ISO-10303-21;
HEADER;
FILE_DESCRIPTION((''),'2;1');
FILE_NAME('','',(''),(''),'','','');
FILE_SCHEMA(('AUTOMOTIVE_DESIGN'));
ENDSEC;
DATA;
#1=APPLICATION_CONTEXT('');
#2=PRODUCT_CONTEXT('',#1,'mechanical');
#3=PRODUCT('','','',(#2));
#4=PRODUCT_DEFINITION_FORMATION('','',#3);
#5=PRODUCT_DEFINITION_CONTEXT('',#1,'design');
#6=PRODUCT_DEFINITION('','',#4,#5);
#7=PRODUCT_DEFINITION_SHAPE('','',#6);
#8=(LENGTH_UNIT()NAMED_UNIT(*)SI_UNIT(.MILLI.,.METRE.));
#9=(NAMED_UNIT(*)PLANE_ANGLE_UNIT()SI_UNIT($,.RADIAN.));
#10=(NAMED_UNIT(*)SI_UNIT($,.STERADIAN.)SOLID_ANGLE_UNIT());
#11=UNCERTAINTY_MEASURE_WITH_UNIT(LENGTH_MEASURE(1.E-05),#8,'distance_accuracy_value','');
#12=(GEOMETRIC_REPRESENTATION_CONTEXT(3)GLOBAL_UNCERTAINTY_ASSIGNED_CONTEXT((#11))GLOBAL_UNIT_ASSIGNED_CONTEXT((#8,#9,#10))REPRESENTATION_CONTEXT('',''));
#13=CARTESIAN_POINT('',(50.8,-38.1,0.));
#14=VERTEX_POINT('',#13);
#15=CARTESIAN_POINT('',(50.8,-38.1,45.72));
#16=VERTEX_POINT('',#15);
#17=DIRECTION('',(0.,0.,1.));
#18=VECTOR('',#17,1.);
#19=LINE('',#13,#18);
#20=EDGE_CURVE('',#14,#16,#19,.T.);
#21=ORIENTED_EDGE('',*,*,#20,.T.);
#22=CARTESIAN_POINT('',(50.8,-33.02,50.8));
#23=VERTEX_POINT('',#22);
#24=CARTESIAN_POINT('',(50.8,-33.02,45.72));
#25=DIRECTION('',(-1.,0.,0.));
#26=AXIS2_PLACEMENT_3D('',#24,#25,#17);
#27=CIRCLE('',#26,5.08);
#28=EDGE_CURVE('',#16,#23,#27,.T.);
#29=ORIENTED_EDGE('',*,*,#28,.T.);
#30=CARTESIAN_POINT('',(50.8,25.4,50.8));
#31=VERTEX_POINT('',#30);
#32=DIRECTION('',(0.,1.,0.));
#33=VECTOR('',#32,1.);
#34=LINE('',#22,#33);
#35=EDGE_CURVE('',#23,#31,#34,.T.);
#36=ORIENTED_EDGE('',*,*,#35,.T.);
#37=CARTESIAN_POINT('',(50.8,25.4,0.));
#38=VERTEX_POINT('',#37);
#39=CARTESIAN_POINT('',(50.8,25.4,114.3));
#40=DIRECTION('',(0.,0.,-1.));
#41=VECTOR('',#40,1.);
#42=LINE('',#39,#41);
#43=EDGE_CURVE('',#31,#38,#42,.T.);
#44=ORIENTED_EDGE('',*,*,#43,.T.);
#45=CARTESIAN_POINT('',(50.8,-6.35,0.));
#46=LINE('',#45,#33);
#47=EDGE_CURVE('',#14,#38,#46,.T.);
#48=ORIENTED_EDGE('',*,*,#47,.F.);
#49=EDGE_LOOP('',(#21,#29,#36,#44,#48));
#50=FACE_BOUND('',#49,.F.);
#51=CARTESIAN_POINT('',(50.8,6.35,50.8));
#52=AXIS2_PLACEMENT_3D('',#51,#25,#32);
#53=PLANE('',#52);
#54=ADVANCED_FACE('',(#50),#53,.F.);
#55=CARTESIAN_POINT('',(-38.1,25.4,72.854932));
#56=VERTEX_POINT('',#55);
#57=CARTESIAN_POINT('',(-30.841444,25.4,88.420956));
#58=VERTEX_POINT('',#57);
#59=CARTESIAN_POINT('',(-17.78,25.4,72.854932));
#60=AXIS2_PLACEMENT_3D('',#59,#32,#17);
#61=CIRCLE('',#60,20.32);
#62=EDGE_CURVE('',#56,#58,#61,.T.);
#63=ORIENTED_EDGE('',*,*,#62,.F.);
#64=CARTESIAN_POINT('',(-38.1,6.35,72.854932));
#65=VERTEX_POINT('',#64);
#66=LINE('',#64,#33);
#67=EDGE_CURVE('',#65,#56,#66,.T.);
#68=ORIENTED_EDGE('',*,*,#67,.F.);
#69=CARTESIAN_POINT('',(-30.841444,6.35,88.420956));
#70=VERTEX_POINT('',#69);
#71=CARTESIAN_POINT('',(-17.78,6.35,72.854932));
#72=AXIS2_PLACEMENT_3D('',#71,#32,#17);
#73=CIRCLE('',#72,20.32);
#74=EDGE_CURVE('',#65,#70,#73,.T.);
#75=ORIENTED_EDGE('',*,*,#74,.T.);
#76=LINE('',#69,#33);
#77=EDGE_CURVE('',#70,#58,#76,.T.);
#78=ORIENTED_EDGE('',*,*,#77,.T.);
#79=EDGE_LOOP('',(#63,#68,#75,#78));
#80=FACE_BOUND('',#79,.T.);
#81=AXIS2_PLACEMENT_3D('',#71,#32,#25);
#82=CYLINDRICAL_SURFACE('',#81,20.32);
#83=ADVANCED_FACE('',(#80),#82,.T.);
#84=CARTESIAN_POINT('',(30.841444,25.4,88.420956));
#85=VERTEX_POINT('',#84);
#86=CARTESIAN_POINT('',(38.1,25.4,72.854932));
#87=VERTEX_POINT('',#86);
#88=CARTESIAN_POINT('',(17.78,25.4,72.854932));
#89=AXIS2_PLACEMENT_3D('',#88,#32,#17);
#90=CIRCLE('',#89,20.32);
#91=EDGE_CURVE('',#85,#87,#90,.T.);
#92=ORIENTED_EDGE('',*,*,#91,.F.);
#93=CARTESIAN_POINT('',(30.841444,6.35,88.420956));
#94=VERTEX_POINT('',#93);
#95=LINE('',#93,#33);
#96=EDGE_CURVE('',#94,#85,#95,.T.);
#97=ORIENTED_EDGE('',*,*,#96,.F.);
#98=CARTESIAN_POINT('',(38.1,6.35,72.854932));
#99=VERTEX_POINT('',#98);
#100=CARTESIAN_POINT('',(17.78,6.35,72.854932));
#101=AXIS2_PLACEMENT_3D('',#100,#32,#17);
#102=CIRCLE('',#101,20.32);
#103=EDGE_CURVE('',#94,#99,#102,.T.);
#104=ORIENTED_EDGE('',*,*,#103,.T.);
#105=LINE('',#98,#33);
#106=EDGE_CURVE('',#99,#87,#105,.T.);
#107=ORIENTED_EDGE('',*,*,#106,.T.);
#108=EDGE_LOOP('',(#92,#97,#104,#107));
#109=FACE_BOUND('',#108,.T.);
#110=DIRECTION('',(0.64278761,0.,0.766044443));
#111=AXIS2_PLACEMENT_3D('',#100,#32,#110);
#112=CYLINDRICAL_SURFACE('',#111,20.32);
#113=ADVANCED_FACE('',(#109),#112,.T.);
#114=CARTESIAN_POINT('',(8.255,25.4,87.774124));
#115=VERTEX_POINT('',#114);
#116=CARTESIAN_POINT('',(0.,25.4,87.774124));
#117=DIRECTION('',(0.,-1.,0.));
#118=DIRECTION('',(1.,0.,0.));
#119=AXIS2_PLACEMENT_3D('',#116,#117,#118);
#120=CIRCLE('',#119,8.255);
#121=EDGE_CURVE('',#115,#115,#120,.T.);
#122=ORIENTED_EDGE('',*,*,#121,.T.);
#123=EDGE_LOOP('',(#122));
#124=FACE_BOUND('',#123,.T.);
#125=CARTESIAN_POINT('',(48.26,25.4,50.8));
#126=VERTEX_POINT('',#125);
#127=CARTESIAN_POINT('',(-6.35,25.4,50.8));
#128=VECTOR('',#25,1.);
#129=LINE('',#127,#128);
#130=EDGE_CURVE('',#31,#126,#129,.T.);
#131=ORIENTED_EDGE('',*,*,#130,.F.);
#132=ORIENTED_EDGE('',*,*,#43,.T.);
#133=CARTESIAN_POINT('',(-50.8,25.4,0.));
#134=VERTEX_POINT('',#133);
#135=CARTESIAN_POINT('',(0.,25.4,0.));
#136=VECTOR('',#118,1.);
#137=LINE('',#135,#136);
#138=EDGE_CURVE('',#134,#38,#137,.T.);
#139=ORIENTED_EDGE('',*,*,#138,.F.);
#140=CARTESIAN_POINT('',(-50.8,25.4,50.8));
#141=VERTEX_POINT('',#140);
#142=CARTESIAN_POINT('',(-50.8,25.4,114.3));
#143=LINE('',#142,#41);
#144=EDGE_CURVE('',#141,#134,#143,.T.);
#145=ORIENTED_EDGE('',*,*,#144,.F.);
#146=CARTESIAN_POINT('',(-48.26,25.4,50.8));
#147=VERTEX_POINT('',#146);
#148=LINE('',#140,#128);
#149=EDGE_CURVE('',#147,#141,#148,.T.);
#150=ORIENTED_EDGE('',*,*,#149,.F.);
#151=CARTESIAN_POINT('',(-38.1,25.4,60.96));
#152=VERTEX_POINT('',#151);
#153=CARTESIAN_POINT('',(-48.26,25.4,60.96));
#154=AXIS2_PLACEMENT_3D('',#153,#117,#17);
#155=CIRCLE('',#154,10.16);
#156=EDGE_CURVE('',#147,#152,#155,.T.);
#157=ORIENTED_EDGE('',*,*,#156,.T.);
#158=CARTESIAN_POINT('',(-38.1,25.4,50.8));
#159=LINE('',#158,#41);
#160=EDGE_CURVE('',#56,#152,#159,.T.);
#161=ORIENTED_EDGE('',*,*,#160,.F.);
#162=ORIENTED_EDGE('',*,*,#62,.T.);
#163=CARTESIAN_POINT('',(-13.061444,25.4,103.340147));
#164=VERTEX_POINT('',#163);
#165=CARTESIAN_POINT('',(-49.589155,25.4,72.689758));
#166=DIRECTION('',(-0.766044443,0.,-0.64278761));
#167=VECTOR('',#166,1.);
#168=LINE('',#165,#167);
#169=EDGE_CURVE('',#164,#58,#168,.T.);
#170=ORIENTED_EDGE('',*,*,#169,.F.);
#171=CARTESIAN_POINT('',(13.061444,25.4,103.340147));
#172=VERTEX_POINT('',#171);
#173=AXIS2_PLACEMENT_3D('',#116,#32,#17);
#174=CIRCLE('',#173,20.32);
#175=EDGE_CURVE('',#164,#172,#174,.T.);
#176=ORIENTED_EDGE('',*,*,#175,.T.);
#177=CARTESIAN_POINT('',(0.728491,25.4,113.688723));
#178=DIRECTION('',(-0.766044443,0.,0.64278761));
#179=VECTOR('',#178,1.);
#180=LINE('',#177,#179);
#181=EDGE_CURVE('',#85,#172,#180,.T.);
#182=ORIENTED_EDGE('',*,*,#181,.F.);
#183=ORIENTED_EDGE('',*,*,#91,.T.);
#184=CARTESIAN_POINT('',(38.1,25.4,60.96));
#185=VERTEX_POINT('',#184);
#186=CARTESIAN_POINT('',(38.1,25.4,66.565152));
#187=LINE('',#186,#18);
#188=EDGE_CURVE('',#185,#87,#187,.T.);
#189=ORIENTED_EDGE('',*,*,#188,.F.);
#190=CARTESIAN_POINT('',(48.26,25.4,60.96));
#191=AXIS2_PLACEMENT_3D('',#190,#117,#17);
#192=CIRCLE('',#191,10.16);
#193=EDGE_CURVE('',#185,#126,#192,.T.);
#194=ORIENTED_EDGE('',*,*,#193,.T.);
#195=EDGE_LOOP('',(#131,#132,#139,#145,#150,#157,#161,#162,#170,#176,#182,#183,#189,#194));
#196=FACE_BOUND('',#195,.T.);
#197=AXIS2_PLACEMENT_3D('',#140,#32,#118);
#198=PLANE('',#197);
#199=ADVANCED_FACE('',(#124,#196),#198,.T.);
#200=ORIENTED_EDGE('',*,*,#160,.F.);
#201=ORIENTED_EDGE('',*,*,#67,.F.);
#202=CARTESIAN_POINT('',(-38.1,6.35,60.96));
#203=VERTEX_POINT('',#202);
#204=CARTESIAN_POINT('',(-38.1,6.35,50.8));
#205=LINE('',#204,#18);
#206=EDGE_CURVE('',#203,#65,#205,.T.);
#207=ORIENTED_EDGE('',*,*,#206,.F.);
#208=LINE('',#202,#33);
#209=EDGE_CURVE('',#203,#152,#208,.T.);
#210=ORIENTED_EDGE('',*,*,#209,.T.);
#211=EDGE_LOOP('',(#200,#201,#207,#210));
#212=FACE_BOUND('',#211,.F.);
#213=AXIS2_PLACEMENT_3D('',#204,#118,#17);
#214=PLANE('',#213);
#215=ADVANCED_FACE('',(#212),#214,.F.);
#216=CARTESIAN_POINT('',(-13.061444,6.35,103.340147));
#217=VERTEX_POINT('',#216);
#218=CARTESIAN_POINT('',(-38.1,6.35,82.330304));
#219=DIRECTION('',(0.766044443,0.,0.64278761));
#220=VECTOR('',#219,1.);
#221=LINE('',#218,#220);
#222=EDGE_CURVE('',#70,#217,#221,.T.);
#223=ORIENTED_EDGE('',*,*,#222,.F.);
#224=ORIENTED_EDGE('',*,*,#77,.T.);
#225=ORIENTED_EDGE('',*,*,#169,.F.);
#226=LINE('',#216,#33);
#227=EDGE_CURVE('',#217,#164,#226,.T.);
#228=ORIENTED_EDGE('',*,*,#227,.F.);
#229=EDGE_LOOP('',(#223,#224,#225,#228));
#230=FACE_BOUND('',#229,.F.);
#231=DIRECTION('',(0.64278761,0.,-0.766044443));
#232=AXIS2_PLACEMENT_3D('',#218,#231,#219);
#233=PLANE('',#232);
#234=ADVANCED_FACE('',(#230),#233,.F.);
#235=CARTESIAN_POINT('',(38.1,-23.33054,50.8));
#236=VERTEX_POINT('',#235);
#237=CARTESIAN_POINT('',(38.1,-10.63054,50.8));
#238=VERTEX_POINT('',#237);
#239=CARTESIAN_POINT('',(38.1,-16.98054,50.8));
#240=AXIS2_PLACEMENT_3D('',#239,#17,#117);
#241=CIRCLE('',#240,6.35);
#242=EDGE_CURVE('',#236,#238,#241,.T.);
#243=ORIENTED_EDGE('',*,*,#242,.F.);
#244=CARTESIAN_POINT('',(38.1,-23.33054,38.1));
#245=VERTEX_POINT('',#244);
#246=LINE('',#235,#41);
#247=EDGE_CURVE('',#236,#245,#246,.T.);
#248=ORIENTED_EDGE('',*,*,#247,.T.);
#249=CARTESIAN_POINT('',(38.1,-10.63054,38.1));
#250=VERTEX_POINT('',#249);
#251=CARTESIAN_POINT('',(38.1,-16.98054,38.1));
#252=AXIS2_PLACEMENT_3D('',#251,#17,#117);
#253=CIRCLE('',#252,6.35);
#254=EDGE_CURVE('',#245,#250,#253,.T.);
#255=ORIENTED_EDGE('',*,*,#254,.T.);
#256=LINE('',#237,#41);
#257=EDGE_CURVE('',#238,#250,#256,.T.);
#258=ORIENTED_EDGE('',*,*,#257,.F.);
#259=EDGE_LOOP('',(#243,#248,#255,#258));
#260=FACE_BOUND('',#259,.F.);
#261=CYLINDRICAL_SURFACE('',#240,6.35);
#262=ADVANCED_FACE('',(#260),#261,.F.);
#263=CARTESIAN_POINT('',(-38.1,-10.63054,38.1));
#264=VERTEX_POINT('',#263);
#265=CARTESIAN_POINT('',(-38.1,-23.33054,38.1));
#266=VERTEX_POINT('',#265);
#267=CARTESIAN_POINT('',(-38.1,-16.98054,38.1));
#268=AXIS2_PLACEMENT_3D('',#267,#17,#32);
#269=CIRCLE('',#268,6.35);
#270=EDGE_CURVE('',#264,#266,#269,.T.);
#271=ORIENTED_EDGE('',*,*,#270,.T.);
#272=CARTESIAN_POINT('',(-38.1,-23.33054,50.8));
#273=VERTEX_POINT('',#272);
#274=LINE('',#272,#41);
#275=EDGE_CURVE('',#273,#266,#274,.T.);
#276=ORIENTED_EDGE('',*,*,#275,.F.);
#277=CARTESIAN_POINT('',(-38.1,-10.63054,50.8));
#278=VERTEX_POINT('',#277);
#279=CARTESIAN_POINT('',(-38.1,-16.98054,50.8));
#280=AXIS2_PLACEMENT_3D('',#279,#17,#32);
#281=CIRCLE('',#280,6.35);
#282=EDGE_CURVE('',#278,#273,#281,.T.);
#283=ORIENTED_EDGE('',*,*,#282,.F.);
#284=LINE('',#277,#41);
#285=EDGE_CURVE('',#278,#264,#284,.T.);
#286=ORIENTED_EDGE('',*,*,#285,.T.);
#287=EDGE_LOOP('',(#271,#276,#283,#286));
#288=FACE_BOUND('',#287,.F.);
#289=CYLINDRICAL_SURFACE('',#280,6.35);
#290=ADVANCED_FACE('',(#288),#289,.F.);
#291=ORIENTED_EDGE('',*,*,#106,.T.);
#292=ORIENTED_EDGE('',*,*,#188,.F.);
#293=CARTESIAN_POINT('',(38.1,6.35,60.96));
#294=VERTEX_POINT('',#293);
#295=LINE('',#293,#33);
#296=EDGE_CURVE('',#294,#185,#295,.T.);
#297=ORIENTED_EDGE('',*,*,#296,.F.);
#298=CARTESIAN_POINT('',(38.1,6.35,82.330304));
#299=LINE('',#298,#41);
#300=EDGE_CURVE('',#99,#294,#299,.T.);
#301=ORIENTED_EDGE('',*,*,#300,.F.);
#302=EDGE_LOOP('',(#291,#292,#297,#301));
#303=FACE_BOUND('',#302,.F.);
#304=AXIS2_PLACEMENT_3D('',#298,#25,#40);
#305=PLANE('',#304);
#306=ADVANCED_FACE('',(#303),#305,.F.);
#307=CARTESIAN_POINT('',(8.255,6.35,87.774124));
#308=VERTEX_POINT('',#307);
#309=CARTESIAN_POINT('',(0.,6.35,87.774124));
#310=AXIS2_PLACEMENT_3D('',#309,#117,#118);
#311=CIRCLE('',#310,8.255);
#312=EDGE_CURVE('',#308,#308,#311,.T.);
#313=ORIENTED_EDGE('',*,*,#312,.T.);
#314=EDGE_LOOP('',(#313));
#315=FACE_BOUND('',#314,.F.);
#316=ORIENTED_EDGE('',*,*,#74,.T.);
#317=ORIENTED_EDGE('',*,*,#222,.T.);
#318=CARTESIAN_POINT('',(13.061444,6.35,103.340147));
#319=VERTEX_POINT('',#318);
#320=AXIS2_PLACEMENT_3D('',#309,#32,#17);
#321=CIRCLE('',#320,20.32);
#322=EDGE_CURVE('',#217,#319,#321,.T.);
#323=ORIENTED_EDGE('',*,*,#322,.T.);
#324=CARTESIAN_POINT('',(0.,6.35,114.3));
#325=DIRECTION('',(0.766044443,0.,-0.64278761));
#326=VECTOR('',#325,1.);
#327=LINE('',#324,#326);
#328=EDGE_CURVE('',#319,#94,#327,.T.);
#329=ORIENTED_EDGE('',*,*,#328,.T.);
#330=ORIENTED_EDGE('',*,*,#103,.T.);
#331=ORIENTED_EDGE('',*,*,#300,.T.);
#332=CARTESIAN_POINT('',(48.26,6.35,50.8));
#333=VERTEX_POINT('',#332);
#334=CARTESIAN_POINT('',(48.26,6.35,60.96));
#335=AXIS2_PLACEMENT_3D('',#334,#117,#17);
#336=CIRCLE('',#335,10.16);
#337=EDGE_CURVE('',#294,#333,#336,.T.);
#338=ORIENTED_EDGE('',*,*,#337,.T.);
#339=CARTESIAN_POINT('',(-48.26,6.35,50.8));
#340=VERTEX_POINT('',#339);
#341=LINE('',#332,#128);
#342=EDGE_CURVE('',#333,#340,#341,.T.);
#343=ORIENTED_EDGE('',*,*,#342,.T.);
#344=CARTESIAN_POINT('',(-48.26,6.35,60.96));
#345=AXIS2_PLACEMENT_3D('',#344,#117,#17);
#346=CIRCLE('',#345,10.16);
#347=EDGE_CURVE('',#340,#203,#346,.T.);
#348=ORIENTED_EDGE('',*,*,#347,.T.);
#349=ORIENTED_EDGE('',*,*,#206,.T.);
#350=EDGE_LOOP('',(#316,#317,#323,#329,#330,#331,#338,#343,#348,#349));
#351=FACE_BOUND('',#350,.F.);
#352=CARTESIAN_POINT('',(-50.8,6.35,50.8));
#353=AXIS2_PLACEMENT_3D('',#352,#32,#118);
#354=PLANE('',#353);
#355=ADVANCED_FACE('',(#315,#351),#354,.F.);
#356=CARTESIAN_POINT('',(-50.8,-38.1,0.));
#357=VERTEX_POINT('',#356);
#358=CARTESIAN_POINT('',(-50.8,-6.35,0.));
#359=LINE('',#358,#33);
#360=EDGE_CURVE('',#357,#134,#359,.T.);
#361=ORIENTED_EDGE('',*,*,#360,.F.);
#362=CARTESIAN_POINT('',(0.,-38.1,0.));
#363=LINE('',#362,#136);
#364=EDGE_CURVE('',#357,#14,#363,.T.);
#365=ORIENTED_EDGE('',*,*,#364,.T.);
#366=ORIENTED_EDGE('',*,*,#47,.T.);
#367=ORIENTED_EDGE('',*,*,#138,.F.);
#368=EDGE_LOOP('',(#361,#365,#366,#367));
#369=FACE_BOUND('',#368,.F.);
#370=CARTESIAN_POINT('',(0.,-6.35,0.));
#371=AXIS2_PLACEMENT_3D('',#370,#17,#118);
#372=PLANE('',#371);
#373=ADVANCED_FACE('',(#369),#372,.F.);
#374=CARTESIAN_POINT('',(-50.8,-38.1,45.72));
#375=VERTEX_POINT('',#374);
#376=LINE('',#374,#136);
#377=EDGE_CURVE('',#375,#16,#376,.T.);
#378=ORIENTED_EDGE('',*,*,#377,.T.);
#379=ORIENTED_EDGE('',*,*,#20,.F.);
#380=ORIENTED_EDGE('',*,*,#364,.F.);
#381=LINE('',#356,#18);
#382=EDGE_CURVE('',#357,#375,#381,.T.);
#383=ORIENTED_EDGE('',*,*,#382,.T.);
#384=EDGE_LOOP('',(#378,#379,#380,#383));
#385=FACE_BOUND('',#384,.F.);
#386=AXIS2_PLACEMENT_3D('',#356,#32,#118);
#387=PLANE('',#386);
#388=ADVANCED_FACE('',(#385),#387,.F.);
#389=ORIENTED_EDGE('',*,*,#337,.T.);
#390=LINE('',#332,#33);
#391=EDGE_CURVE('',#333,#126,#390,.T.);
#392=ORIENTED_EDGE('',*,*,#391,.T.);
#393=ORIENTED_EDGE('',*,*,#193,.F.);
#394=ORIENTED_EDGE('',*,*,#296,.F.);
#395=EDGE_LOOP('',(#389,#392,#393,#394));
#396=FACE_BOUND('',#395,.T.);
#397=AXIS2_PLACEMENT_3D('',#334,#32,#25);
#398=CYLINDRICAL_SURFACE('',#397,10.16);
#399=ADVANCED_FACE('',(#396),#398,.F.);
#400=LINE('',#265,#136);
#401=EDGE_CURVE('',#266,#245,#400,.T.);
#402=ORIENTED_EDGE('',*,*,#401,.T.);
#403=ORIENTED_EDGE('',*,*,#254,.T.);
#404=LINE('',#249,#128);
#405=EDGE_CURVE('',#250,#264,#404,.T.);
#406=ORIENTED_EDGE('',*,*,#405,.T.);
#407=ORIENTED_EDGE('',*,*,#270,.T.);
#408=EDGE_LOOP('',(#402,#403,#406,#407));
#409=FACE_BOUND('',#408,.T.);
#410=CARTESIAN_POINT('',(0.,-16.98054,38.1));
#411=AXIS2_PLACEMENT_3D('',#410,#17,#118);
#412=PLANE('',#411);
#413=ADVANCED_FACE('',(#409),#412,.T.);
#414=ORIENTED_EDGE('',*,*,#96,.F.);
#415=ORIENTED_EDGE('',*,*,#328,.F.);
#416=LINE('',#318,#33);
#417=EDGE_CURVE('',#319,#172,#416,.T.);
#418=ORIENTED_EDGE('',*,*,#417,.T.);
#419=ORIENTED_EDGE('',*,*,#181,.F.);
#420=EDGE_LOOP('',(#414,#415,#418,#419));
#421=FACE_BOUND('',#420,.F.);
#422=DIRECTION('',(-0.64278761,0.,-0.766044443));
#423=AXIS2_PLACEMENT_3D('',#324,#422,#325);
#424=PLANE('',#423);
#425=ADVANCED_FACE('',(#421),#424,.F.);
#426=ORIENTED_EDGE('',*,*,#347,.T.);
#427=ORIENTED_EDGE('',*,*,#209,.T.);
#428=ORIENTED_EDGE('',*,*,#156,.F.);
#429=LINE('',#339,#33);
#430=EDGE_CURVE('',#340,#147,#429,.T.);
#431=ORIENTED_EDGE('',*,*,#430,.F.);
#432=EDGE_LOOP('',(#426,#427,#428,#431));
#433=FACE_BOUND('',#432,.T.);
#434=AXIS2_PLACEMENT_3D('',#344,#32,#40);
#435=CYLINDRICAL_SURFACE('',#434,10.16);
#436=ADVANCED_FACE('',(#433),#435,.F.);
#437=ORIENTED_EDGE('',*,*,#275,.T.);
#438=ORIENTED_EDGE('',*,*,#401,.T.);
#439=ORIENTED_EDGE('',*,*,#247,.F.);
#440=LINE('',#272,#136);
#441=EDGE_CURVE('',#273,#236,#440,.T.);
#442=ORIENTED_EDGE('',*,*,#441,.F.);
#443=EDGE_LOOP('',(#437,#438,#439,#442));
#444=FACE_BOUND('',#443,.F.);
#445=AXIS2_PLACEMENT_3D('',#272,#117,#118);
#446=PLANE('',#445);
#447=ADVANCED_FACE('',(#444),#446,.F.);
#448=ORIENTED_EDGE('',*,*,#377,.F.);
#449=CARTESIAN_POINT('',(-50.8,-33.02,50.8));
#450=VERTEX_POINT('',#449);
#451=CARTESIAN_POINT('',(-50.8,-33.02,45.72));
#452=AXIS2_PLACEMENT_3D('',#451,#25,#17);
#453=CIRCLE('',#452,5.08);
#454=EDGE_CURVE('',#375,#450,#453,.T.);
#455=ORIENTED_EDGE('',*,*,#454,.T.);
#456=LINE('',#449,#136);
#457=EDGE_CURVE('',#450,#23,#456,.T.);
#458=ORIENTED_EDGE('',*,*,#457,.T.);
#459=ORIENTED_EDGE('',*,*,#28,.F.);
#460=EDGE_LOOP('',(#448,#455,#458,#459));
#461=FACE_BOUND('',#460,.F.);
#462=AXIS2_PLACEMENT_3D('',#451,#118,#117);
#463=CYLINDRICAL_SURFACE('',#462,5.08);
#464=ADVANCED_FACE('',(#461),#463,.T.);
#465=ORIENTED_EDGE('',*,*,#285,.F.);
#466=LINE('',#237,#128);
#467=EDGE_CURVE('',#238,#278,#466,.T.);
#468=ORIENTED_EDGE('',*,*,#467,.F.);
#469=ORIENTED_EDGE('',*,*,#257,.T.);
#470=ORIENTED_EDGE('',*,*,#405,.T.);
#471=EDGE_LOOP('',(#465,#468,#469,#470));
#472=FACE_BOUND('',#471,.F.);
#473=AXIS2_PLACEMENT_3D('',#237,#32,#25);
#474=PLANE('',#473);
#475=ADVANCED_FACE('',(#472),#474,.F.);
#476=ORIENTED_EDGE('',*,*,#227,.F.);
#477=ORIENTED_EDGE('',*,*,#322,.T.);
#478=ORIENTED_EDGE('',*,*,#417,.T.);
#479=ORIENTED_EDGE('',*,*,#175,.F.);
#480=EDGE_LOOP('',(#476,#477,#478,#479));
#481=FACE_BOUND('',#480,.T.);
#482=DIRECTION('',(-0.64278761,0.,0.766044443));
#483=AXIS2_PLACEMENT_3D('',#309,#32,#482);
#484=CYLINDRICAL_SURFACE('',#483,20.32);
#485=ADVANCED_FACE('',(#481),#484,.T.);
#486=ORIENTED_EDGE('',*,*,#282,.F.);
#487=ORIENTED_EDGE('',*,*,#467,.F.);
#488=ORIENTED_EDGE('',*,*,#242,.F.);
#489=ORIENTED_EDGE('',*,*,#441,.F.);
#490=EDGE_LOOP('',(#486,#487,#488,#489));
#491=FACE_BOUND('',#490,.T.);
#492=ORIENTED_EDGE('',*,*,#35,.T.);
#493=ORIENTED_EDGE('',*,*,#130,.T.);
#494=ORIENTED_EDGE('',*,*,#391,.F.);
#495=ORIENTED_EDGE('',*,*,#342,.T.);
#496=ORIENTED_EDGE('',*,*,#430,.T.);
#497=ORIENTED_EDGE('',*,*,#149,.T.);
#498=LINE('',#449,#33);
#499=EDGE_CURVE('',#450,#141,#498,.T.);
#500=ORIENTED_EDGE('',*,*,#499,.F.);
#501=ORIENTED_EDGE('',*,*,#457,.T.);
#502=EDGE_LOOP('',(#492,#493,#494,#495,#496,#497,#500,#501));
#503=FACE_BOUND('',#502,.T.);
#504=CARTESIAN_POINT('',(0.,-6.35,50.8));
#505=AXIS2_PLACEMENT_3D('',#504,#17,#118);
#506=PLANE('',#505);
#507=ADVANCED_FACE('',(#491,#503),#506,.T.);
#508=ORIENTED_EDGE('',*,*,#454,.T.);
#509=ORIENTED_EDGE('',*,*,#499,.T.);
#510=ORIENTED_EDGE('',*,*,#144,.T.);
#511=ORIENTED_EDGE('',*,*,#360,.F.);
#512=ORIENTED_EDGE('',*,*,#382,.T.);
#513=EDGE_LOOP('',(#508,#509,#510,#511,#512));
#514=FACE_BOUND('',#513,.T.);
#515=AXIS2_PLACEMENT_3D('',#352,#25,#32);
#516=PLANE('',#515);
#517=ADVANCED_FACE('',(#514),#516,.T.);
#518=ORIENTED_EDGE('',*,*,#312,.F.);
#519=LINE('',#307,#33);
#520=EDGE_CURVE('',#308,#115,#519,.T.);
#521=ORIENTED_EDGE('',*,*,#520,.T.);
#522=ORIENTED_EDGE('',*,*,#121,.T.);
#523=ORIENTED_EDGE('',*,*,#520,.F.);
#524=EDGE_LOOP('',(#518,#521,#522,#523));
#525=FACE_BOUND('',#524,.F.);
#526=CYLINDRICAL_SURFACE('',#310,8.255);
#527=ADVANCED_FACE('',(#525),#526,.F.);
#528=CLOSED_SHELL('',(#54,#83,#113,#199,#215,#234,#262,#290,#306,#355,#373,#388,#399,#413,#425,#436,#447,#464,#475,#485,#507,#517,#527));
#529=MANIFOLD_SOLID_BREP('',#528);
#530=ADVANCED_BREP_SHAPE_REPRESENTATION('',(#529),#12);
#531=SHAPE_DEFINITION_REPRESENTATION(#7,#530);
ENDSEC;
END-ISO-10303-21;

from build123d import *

# Parameters (mm, degrees)
F0_W      = 101.6
F0_H      = 63.5
F1_DEPTH  = 50.8
F2_R      = 5.08
F4_DEPTH  = 12.7
F5_W      = 101.6
F5_H      = 19.05
F6_DEPTH  = 63.5
F8_DEPTH  = 25.4
F9_R      = 20.32
F10_R     = 10.16
F11_R     = 8.255
F12_DEPTH = 25.4


with BuildPart() as f1:
    # F0 (on Top) → F1 (new body)
    with BuildSketch(Plane.XY):
        with Locations((0, -6.35)):
            Rectangle(F0_W, F0_H)
    extrude(amount=F1_DEPTH)

    # F2
    f2_edges = [f1.edges().sort_by_distance(p)[0] for p in [
        (0, -38.1, 50.8),
    ]]
    fillet(f2_edges, radius=F2_R)

    # F3 (on face) → F4 (cut)
    with BuildSketch(Plane.XY.offset(50.8)):
        with BuildLine():
            Line((38.1, -10.6305400074), (-38.1, -10.6305400074))
            ThreePointArc((-38.1, -10.6305400074), (-44.45, -16.9805400074), (-38.1, -23.3305400074))
            Line((-38.1, -23.3305400074), (38.1, -23.3305400074))
            ThreePointArc((38.1, -23.3305400074), (44.45, -16.9805400074), (38.1, -10.6305400074))
        make_face()
    extrude(amount=-F4_DEPTH, mode=Mode.SUBTRACT)

    # F5 (on face) → F6 (join)
    with BuildSketch(Plane.XY.offset(50.8)):
        with Locations((0, 15.875)):
            Rectangle(F5_W, F5_H)
    extrude(amount=F6_DEPTH)

    # F7 (on face) → F8 (cut)
    with BuildSketch(Plane.XZ.offset(-6.35)):
        Polygon((-50.8, 50.8), (-38.1, 50.8), (-38.1, 82.3303040521), (0, 114.3), (-50.8, 114.3), align=None)
        Polygon((38.1, 50.8), (50.8, 50.8), (50.8, 114.3), (0, 114.3), (38.1, 82.3303040521), align=None)
    extrude(amount=-F8_DEPTH, mode=Mode.SUBTRACT)

    # F9
    f9_edges = [f1.edges().sort_by_distance(p)[0] for p in [
        (38.1, 15.875, 82.330304),
        (-38.1, 15.875, 82.330304),
        (0, 15.875, 114.3),
    ]]
    fillet(f9_edges, radius=F9_R)

    # F10
    f10_edges = [f1.edges().sort_by_distance(p)[0] for p in [
        (38.1, 15.875, 50.8),
        (-38.1, 15.875, 50.8),
    ]]
    fillet(f10_edges, radius=F10_R)

    # F11 (on face) → F12 (cut)
    with BuildSketch(Plane.XZ.offset(-6.35)):
        with Locations((0, 87.7741238808)):
            Circle(F11_R)
    extrude(amount=-F12_DEPTH, mode=Mode.SUBTRACT)


solid = f1.part
